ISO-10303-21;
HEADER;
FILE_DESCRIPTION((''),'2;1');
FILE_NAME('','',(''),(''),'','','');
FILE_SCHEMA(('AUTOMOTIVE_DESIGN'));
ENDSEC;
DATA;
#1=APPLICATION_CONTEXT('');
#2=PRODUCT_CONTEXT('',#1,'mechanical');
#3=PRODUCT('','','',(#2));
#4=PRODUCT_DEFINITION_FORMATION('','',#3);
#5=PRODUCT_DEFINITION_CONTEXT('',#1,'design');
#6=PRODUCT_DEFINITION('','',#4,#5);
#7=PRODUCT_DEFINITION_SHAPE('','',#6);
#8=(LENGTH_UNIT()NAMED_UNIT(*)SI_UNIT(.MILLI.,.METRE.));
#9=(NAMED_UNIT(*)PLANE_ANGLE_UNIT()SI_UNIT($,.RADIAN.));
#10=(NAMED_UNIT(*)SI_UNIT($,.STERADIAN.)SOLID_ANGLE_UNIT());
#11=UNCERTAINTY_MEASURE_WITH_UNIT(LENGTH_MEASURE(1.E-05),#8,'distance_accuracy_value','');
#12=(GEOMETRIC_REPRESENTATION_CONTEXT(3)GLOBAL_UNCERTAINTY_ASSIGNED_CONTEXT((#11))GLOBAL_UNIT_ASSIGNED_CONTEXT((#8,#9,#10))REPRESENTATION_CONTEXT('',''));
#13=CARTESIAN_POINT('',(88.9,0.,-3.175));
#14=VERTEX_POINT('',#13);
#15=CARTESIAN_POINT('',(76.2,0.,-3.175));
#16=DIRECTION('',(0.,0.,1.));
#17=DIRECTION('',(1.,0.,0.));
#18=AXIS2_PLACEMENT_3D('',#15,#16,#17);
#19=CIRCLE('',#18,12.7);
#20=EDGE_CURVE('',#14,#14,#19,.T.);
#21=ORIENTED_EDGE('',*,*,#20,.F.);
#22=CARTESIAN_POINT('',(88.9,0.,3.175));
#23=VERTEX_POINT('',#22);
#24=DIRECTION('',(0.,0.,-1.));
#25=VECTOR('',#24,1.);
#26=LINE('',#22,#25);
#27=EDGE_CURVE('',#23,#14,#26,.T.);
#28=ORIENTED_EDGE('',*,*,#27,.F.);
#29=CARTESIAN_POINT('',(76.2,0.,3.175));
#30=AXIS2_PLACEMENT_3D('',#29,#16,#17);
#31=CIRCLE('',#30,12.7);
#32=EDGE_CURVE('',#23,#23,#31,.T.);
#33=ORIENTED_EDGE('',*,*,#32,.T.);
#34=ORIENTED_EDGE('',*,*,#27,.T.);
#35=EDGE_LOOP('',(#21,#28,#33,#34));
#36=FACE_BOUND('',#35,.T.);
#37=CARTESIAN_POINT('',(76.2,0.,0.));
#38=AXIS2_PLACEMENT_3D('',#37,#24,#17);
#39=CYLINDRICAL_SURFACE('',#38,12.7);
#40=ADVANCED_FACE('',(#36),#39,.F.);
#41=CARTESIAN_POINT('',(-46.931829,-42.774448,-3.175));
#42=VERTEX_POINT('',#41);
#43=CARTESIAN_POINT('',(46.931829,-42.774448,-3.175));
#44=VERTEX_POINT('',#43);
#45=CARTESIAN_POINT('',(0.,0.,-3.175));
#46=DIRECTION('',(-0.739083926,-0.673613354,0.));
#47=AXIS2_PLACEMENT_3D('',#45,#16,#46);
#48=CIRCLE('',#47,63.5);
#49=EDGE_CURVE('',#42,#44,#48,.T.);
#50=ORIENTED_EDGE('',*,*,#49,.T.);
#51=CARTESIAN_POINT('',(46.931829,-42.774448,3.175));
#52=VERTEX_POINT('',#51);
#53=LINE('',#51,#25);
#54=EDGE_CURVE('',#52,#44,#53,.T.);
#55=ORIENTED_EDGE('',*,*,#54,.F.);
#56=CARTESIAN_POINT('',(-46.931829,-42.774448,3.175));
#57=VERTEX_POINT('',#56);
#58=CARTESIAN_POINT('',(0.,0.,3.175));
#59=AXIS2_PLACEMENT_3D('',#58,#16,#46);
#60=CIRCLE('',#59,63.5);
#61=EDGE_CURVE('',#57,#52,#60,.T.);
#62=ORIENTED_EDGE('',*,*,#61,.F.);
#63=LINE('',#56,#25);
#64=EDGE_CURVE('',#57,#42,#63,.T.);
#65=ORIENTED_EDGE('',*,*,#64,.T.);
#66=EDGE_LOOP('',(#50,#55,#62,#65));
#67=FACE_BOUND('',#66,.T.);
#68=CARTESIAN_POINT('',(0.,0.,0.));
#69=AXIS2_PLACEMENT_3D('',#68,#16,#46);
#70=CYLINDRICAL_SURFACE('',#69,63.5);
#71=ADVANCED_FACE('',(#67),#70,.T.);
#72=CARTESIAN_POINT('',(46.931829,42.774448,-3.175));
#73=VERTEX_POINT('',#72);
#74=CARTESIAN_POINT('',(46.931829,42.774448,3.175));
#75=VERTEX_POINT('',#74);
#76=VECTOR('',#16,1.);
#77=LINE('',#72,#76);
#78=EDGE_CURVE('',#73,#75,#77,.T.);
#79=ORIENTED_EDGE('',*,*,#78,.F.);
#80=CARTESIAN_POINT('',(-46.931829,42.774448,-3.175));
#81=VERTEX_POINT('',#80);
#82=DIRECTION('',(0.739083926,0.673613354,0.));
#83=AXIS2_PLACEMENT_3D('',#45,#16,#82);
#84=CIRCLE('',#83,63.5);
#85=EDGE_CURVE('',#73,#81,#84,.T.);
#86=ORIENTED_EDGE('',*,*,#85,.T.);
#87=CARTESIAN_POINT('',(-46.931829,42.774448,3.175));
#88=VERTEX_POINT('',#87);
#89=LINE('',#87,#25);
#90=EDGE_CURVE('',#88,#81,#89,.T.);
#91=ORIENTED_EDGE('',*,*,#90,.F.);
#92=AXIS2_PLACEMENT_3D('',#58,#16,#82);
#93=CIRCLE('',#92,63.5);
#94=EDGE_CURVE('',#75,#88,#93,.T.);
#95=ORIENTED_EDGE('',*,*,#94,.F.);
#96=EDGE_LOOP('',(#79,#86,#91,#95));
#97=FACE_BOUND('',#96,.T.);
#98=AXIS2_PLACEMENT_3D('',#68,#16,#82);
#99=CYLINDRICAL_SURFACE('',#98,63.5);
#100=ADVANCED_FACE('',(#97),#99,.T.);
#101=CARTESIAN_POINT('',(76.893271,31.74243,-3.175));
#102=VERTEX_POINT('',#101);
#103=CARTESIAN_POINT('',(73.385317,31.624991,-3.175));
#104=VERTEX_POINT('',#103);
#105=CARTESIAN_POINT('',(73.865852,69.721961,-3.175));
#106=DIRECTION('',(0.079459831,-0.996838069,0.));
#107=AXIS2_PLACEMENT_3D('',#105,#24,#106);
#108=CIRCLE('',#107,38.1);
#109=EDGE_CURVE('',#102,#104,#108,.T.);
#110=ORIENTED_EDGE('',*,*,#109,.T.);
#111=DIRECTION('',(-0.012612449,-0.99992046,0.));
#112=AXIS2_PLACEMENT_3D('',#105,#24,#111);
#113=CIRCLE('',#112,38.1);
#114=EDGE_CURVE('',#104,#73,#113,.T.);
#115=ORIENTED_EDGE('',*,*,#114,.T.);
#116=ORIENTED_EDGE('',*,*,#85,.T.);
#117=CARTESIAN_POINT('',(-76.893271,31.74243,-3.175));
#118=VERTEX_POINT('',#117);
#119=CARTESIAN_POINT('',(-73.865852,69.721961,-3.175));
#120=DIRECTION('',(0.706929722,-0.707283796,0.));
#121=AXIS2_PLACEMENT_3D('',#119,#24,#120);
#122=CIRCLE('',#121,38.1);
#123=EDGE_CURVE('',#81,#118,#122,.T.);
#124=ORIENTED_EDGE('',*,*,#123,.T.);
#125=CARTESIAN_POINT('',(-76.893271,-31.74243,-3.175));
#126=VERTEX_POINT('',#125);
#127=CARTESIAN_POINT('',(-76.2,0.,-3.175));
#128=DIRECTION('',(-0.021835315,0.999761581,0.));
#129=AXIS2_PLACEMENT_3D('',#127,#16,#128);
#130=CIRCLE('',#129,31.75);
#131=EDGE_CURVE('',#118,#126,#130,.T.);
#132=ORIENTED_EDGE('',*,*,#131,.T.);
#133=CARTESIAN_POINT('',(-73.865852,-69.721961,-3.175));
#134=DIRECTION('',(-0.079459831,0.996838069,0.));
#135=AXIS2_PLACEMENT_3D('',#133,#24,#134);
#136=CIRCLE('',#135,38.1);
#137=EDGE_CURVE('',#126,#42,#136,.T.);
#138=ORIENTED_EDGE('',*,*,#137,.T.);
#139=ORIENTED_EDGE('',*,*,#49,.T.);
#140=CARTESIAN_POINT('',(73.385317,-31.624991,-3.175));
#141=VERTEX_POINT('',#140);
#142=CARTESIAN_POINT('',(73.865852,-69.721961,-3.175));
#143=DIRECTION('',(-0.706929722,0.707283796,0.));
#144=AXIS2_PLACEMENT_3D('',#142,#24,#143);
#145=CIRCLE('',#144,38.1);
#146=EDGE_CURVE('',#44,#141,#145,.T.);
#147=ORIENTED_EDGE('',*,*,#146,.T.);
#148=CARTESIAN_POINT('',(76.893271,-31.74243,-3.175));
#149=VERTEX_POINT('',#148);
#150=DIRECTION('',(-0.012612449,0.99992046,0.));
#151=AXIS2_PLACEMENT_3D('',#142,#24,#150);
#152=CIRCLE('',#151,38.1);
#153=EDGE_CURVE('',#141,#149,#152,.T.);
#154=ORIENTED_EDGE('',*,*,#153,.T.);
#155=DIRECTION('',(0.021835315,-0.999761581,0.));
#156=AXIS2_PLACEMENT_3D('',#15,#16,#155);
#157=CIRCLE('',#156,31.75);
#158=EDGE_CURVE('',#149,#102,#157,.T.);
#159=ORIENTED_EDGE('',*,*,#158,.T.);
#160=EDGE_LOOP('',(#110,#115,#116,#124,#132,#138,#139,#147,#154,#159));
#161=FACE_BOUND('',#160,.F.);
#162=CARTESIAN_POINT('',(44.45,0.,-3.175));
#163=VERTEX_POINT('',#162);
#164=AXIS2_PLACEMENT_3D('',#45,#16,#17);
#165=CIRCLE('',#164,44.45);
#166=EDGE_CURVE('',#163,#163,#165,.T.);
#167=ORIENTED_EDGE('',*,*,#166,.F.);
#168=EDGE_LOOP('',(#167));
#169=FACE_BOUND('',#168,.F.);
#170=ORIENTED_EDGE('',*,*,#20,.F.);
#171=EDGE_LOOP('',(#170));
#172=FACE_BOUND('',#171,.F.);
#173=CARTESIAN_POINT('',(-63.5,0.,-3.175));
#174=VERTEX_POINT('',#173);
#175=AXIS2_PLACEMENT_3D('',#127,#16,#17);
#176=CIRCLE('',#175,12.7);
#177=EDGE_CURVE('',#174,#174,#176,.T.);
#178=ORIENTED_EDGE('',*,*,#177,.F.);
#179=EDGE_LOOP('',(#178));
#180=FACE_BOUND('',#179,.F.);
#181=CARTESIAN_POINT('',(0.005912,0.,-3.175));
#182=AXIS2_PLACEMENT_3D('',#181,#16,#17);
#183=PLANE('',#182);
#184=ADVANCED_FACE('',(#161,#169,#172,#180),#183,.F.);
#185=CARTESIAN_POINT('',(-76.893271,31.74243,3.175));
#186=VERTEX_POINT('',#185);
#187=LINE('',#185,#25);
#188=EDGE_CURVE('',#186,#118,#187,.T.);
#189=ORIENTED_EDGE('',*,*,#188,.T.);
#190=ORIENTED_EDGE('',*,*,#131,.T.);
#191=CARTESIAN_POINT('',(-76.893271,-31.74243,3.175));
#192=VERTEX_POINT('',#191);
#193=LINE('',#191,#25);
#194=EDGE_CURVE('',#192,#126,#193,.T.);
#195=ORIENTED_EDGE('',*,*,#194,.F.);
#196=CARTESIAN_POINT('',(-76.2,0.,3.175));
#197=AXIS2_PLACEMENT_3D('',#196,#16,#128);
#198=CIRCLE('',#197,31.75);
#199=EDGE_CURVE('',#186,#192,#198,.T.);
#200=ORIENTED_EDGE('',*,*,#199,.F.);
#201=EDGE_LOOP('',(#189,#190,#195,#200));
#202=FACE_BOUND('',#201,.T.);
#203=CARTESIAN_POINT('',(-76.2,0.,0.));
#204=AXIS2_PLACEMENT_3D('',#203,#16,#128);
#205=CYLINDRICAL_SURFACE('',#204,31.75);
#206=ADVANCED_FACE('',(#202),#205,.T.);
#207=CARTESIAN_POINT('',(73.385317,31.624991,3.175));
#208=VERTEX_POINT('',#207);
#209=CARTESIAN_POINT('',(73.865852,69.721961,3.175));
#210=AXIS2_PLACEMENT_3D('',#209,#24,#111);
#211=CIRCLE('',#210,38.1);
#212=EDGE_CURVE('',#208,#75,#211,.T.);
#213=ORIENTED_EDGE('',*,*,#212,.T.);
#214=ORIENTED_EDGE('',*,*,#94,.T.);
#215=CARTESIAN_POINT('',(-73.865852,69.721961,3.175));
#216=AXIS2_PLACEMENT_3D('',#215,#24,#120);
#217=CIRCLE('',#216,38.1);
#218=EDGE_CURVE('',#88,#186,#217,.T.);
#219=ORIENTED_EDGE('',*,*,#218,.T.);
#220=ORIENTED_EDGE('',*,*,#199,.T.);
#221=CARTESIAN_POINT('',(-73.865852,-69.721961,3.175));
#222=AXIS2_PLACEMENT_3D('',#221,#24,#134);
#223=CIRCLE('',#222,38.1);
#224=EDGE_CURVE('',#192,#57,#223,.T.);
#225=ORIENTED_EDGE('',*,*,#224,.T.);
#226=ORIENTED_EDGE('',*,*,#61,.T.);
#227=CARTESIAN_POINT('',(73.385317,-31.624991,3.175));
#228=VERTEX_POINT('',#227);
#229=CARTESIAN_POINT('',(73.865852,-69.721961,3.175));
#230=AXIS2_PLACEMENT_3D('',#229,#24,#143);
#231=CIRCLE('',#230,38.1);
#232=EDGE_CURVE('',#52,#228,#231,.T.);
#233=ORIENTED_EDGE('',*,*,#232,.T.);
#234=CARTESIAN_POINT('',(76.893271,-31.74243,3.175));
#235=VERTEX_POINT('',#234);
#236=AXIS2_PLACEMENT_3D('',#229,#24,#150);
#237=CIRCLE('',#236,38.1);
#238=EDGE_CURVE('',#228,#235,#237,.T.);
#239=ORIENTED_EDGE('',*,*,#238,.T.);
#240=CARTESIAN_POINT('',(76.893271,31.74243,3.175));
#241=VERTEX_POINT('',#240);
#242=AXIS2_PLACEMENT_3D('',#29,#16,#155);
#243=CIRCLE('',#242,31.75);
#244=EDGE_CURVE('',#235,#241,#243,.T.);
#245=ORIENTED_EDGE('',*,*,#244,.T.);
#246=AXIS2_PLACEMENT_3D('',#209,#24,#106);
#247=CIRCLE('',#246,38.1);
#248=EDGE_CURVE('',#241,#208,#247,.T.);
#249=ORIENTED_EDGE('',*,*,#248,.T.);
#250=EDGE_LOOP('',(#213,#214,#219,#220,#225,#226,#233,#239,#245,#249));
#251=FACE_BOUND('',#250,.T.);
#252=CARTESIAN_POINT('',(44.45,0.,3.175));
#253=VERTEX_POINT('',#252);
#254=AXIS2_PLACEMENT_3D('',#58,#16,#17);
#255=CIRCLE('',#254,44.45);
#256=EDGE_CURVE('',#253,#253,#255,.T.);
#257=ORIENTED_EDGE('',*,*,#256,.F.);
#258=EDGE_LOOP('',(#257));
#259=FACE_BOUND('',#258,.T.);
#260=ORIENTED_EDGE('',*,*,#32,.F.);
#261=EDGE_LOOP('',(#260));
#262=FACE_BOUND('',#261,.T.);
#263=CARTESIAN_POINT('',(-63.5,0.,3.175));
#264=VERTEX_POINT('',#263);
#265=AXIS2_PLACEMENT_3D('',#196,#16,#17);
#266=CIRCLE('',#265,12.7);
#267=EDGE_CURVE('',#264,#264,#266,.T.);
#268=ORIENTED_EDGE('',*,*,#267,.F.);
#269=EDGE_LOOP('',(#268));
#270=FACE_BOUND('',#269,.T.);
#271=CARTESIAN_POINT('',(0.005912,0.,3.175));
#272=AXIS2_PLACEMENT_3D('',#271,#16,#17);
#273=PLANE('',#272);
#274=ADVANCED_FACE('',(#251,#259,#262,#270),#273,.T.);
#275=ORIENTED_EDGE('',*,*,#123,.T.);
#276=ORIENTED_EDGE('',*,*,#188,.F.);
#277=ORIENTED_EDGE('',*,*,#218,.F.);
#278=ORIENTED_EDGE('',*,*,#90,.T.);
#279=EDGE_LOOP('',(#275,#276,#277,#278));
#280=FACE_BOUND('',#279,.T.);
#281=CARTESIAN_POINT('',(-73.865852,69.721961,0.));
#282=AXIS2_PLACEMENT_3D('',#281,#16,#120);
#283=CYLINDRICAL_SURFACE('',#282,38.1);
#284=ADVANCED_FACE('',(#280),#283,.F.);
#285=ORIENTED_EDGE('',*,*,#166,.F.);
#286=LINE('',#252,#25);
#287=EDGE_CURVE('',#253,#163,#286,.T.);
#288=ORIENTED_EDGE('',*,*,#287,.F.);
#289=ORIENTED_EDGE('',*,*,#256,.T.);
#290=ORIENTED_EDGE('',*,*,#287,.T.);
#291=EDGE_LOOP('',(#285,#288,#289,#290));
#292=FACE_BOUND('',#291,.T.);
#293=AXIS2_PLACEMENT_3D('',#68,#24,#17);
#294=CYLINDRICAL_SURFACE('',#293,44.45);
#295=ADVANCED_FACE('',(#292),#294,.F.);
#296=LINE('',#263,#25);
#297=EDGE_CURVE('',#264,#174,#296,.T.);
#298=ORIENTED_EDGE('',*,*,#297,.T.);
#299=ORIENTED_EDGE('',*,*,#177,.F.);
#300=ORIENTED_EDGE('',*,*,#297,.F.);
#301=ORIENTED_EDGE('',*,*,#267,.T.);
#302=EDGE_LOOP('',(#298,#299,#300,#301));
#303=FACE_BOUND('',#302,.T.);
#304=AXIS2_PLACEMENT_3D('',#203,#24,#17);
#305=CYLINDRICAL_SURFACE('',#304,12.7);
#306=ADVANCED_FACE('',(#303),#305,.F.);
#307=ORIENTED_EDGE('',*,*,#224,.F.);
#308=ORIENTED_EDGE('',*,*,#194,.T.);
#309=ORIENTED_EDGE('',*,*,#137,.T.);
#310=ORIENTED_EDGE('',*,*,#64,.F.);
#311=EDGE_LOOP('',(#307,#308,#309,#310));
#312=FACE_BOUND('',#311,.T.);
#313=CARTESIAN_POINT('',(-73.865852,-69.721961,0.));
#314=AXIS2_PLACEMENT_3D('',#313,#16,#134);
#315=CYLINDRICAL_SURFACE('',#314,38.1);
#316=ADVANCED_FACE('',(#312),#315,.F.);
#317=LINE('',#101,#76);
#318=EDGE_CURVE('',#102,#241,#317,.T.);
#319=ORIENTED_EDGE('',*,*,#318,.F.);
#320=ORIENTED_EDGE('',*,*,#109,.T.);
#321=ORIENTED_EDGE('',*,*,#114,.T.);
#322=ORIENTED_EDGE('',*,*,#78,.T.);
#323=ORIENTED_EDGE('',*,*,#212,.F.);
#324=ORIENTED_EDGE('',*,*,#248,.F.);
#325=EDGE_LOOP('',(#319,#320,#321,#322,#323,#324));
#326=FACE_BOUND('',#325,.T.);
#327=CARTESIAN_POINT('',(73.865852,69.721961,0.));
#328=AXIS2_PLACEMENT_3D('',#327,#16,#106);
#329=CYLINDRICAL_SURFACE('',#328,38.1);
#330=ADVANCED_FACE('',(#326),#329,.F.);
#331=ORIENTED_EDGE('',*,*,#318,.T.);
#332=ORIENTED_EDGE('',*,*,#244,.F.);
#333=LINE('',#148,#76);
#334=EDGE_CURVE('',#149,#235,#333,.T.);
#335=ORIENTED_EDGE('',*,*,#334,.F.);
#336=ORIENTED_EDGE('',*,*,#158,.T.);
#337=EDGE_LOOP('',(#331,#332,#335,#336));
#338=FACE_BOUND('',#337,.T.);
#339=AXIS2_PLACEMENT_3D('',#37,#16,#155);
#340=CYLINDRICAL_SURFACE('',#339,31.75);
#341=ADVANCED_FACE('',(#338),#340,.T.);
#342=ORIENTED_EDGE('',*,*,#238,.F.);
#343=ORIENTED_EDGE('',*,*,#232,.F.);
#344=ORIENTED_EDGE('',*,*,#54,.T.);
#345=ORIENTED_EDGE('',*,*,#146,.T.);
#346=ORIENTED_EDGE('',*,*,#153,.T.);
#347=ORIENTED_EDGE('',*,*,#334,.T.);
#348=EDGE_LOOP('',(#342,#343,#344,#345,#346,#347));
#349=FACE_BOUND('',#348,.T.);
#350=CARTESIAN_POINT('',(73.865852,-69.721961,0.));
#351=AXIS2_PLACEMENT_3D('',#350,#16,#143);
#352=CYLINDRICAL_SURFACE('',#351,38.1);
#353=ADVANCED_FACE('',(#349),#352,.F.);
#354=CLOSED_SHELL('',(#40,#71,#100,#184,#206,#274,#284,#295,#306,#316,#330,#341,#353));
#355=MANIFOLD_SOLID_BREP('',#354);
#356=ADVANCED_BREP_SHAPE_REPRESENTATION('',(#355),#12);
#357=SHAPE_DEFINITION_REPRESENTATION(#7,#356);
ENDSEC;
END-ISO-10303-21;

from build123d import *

# Parameters (mm, degrees)
F0_R     = 12.7
F0_R_2   = 44.45
F1_DEPTH = 3.175


# Not quite as in the source:
# - a feature names something its author has since deleted; it is built from what else it names


with BuildPart() as f1:
    # F0 (on Top) → F1 (new body, symmetric)
    with BuildSketch(Plane.XY):
        with BuildLine():
            ThreePointArc((46.9318292839, -42.7744479808), (59.0683155093, -34.6129457767), (73.3853173936, -31.624991096))
            ThreePointArc((73.3853173936, -31.624991096), (75.1406474031, -31.6432934166), (76.8932712405, -31.7424301998))
            ThreePointArc((76.8932712405, -31.7424301998), (107.95, 0), (76.8932712405, 31.7424301998))
            ThreePointArc((76.8932712405, 31.7424301998), (75.1406474031, 31.6432934166), (73.3853173936, 31.624991096))
            ThreePointArc((73.3853173936, 31.624991096), (59.0683155093, 34.6129457767), (46.9318292839, 42.7744479808))
            ThreePointArc((46.9318292839, 42.7744479808), (0, 63.5), (-46.9318292839, 42.7744479808))
            ThreePointArc((-46.9318292839, 42.7744479808), (-60.7012108245, 33.968607894), (-76.8932712405, 31.7424301998))
            ThreePointArc((-76.8932712405, 31.7424301998), (-107.95, 0), (-76.8932712405, -31.7424301998))
            ThreePointArc((-76.8932712405, -31.7424301998), (-60.7012108245, -33.968607894), (-46.9318292839, -42.7744479808))
            ThreePointArc((-46.9318292839, -42.7744479808), (0, -63.5), (46.9318292839, -42.7744479808))
        make_face()
        with Locations((-76.2, 0)):
            Circle(F0_R, mode=Mode.SUBTRACT)
        Circle(F0_R_2, mode=Mode.SUBTRACT)
        with Locations((76.2, 0)):
            Circle(F0_R, mode=Mode.SUBTRACT)
    extrude(amount=F1_DEPTH, both=True)


solid = f1.part
